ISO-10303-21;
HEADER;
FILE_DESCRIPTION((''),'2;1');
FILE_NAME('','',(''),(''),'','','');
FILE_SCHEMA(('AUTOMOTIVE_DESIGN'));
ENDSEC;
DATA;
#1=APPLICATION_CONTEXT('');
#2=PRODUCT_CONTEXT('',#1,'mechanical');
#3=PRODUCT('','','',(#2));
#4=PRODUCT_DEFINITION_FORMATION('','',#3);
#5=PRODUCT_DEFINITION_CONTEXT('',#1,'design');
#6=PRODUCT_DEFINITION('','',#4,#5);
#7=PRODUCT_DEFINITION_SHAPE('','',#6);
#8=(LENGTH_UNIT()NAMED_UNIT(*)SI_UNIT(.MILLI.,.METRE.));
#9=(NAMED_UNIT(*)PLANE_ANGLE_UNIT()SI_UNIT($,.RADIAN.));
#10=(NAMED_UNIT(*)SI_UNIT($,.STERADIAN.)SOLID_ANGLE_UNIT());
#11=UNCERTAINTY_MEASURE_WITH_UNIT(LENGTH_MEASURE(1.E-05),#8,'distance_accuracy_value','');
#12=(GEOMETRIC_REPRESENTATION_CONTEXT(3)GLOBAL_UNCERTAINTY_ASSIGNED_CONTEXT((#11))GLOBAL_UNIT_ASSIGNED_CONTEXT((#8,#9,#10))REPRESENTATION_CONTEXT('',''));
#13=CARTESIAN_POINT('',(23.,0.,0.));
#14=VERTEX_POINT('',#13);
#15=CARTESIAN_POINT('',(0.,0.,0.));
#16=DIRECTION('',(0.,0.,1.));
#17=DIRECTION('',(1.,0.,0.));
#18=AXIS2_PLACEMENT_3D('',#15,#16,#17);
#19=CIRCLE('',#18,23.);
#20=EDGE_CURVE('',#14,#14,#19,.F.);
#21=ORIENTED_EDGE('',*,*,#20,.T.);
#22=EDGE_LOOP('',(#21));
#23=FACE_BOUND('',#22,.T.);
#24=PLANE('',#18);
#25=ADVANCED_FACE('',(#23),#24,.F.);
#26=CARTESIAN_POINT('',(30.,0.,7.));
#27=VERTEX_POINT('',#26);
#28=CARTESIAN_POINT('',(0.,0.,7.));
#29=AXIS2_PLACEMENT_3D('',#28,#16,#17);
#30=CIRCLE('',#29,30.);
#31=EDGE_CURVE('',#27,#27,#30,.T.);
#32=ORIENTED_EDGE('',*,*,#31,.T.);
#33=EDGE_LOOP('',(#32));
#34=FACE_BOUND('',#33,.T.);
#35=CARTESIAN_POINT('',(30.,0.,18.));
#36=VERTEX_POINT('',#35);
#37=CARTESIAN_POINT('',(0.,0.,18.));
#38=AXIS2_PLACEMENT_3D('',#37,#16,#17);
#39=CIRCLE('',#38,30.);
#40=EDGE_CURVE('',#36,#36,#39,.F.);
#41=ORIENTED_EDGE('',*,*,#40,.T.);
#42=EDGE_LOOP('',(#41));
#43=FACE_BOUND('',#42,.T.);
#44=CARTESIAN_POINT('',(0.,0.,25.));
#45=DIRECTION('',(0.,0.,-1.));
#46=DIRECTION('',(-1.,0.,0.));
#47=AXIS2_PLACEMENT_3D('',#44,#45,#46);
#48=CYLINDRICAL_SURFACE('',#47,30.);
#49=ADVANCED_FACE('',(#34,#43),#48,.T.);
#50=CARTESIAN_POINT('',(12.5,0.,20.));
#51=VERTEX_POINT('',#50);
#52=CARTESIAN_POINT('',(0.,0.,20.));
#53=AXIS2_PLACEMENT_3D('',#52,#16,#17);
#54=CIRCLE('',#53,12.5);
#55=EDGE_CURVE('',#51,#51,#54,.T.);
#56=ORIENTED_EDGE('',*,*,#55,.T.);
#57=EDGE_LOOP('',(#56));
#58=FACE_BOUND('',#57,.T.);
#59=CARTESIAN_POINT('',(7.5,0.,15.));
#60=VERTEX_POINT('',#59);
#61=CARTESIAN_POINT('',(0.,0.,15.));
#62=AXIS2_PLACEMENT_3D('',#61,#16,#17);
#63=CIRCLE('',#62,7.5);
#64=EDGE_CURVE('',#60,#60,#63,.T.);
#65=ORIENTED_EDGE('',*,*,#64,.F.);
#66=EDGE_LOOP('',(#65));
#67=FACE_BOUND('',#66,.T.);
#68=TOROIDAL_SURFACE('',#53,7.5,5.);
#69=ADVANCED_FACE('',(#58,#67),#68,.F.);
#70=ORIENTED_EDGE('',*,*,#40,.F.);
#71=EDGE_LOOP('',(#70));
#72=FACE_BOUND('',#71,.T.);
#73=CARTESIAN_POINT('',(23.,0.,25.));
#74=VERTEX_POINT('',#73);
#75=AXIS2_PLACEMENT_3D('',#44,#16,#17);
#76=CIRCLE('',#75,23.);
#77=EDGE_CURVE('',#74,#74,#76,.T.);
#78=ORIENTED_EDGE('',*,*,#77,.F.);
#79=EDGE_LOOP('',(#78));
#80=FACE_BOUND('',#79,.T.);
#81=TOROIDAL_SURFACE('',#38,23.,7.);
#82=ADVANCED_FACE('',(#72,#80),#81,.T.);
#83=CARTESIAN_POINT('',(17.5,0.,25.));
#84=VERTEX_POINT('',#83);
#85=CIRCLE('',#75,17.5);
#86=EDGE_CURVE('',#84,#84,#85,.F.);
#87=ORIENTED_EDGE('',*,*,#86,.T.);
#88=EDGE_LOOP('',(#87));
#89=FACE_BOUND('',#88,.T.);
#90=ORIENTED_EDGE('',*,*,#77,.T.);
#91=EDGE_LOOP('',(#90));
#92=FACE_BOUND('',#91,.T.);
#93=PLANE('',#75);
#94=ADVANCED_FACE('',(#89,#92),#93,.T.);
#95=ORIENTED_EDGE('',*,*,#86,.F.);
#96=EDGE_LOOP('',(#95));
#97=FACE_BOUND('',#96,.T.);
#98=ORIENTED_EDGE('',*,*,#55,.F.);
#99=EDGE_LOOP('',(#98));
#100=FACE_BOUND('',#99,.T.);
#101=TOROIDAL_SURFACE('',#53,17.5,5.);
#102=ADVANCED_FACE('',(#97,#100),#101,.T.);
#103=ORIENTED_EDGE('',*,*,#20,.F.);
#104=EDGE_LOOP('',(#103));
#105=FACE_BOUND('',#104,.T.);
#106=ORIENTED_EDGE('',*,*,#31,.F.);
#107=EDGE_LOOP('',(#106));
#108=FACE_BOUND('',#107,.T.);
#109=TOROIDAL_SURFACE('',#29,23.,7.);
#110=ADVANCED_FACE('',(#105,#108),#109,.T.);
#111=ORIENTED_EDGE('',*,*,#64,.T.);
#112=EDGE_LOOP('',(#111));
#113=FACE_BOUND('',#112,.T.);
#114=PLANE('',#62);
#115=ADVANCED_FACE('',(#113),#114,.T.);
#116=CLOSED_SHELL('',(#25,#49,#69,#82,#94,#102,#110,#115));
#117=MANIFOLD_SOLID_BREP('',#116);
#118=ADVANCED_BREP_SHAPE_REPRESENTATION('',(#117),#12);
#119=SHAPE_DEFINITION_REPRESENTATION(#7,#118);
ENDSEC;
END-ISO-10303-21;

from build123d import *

# Parameters (mm, degrees)
SKETCH1_R           = 30
BOSS_EXTRUDE1_DEPTH = 25
SKETCH2_R           = 12.5
CUT_EXTRUDE1_DEPTH  = 10
FILLET1_R           = 5
FILLET2_R           = 7


with BuildPart() as part:
    # Sketch1 → Boss-Extrude1 (new body)
    with BuildSketch(Plane.XY):
        Circle(SKETCH1_R)
    extrude(amount=BOSS_EXTRUDE1_DEPTH)

    # Sketch2 → Cut-Extrude1 (cut)
    with BuildSketch(Plane.XY.offset(25)):
        Circle(SKETCH2_R)
    extrude(amount=-CUT_EXTRUDE1_DEPTH, mode=Mode.SUBTRACT)

    # Fillet1
    fillet1_edges = [part.edges().sort_by_distance(p)[0] for p in [
        (-12.5, 0, 15),
        (-12.5, 0, 25),
    ]]
    fillet(fillet1_edges, radius=FILLET1_R - 0.0001)  # a hair under: the kernel refuses the full size

    # Fillet2
    fillet2_edges = [part.edges().sort_by_distance(p)[0] for p in [
        (-30, 0, 0),
        (-30, 0, 25),
    ]]
    fillet(fillet2_edges, radius=FILLET2_R)


solid = part.part
